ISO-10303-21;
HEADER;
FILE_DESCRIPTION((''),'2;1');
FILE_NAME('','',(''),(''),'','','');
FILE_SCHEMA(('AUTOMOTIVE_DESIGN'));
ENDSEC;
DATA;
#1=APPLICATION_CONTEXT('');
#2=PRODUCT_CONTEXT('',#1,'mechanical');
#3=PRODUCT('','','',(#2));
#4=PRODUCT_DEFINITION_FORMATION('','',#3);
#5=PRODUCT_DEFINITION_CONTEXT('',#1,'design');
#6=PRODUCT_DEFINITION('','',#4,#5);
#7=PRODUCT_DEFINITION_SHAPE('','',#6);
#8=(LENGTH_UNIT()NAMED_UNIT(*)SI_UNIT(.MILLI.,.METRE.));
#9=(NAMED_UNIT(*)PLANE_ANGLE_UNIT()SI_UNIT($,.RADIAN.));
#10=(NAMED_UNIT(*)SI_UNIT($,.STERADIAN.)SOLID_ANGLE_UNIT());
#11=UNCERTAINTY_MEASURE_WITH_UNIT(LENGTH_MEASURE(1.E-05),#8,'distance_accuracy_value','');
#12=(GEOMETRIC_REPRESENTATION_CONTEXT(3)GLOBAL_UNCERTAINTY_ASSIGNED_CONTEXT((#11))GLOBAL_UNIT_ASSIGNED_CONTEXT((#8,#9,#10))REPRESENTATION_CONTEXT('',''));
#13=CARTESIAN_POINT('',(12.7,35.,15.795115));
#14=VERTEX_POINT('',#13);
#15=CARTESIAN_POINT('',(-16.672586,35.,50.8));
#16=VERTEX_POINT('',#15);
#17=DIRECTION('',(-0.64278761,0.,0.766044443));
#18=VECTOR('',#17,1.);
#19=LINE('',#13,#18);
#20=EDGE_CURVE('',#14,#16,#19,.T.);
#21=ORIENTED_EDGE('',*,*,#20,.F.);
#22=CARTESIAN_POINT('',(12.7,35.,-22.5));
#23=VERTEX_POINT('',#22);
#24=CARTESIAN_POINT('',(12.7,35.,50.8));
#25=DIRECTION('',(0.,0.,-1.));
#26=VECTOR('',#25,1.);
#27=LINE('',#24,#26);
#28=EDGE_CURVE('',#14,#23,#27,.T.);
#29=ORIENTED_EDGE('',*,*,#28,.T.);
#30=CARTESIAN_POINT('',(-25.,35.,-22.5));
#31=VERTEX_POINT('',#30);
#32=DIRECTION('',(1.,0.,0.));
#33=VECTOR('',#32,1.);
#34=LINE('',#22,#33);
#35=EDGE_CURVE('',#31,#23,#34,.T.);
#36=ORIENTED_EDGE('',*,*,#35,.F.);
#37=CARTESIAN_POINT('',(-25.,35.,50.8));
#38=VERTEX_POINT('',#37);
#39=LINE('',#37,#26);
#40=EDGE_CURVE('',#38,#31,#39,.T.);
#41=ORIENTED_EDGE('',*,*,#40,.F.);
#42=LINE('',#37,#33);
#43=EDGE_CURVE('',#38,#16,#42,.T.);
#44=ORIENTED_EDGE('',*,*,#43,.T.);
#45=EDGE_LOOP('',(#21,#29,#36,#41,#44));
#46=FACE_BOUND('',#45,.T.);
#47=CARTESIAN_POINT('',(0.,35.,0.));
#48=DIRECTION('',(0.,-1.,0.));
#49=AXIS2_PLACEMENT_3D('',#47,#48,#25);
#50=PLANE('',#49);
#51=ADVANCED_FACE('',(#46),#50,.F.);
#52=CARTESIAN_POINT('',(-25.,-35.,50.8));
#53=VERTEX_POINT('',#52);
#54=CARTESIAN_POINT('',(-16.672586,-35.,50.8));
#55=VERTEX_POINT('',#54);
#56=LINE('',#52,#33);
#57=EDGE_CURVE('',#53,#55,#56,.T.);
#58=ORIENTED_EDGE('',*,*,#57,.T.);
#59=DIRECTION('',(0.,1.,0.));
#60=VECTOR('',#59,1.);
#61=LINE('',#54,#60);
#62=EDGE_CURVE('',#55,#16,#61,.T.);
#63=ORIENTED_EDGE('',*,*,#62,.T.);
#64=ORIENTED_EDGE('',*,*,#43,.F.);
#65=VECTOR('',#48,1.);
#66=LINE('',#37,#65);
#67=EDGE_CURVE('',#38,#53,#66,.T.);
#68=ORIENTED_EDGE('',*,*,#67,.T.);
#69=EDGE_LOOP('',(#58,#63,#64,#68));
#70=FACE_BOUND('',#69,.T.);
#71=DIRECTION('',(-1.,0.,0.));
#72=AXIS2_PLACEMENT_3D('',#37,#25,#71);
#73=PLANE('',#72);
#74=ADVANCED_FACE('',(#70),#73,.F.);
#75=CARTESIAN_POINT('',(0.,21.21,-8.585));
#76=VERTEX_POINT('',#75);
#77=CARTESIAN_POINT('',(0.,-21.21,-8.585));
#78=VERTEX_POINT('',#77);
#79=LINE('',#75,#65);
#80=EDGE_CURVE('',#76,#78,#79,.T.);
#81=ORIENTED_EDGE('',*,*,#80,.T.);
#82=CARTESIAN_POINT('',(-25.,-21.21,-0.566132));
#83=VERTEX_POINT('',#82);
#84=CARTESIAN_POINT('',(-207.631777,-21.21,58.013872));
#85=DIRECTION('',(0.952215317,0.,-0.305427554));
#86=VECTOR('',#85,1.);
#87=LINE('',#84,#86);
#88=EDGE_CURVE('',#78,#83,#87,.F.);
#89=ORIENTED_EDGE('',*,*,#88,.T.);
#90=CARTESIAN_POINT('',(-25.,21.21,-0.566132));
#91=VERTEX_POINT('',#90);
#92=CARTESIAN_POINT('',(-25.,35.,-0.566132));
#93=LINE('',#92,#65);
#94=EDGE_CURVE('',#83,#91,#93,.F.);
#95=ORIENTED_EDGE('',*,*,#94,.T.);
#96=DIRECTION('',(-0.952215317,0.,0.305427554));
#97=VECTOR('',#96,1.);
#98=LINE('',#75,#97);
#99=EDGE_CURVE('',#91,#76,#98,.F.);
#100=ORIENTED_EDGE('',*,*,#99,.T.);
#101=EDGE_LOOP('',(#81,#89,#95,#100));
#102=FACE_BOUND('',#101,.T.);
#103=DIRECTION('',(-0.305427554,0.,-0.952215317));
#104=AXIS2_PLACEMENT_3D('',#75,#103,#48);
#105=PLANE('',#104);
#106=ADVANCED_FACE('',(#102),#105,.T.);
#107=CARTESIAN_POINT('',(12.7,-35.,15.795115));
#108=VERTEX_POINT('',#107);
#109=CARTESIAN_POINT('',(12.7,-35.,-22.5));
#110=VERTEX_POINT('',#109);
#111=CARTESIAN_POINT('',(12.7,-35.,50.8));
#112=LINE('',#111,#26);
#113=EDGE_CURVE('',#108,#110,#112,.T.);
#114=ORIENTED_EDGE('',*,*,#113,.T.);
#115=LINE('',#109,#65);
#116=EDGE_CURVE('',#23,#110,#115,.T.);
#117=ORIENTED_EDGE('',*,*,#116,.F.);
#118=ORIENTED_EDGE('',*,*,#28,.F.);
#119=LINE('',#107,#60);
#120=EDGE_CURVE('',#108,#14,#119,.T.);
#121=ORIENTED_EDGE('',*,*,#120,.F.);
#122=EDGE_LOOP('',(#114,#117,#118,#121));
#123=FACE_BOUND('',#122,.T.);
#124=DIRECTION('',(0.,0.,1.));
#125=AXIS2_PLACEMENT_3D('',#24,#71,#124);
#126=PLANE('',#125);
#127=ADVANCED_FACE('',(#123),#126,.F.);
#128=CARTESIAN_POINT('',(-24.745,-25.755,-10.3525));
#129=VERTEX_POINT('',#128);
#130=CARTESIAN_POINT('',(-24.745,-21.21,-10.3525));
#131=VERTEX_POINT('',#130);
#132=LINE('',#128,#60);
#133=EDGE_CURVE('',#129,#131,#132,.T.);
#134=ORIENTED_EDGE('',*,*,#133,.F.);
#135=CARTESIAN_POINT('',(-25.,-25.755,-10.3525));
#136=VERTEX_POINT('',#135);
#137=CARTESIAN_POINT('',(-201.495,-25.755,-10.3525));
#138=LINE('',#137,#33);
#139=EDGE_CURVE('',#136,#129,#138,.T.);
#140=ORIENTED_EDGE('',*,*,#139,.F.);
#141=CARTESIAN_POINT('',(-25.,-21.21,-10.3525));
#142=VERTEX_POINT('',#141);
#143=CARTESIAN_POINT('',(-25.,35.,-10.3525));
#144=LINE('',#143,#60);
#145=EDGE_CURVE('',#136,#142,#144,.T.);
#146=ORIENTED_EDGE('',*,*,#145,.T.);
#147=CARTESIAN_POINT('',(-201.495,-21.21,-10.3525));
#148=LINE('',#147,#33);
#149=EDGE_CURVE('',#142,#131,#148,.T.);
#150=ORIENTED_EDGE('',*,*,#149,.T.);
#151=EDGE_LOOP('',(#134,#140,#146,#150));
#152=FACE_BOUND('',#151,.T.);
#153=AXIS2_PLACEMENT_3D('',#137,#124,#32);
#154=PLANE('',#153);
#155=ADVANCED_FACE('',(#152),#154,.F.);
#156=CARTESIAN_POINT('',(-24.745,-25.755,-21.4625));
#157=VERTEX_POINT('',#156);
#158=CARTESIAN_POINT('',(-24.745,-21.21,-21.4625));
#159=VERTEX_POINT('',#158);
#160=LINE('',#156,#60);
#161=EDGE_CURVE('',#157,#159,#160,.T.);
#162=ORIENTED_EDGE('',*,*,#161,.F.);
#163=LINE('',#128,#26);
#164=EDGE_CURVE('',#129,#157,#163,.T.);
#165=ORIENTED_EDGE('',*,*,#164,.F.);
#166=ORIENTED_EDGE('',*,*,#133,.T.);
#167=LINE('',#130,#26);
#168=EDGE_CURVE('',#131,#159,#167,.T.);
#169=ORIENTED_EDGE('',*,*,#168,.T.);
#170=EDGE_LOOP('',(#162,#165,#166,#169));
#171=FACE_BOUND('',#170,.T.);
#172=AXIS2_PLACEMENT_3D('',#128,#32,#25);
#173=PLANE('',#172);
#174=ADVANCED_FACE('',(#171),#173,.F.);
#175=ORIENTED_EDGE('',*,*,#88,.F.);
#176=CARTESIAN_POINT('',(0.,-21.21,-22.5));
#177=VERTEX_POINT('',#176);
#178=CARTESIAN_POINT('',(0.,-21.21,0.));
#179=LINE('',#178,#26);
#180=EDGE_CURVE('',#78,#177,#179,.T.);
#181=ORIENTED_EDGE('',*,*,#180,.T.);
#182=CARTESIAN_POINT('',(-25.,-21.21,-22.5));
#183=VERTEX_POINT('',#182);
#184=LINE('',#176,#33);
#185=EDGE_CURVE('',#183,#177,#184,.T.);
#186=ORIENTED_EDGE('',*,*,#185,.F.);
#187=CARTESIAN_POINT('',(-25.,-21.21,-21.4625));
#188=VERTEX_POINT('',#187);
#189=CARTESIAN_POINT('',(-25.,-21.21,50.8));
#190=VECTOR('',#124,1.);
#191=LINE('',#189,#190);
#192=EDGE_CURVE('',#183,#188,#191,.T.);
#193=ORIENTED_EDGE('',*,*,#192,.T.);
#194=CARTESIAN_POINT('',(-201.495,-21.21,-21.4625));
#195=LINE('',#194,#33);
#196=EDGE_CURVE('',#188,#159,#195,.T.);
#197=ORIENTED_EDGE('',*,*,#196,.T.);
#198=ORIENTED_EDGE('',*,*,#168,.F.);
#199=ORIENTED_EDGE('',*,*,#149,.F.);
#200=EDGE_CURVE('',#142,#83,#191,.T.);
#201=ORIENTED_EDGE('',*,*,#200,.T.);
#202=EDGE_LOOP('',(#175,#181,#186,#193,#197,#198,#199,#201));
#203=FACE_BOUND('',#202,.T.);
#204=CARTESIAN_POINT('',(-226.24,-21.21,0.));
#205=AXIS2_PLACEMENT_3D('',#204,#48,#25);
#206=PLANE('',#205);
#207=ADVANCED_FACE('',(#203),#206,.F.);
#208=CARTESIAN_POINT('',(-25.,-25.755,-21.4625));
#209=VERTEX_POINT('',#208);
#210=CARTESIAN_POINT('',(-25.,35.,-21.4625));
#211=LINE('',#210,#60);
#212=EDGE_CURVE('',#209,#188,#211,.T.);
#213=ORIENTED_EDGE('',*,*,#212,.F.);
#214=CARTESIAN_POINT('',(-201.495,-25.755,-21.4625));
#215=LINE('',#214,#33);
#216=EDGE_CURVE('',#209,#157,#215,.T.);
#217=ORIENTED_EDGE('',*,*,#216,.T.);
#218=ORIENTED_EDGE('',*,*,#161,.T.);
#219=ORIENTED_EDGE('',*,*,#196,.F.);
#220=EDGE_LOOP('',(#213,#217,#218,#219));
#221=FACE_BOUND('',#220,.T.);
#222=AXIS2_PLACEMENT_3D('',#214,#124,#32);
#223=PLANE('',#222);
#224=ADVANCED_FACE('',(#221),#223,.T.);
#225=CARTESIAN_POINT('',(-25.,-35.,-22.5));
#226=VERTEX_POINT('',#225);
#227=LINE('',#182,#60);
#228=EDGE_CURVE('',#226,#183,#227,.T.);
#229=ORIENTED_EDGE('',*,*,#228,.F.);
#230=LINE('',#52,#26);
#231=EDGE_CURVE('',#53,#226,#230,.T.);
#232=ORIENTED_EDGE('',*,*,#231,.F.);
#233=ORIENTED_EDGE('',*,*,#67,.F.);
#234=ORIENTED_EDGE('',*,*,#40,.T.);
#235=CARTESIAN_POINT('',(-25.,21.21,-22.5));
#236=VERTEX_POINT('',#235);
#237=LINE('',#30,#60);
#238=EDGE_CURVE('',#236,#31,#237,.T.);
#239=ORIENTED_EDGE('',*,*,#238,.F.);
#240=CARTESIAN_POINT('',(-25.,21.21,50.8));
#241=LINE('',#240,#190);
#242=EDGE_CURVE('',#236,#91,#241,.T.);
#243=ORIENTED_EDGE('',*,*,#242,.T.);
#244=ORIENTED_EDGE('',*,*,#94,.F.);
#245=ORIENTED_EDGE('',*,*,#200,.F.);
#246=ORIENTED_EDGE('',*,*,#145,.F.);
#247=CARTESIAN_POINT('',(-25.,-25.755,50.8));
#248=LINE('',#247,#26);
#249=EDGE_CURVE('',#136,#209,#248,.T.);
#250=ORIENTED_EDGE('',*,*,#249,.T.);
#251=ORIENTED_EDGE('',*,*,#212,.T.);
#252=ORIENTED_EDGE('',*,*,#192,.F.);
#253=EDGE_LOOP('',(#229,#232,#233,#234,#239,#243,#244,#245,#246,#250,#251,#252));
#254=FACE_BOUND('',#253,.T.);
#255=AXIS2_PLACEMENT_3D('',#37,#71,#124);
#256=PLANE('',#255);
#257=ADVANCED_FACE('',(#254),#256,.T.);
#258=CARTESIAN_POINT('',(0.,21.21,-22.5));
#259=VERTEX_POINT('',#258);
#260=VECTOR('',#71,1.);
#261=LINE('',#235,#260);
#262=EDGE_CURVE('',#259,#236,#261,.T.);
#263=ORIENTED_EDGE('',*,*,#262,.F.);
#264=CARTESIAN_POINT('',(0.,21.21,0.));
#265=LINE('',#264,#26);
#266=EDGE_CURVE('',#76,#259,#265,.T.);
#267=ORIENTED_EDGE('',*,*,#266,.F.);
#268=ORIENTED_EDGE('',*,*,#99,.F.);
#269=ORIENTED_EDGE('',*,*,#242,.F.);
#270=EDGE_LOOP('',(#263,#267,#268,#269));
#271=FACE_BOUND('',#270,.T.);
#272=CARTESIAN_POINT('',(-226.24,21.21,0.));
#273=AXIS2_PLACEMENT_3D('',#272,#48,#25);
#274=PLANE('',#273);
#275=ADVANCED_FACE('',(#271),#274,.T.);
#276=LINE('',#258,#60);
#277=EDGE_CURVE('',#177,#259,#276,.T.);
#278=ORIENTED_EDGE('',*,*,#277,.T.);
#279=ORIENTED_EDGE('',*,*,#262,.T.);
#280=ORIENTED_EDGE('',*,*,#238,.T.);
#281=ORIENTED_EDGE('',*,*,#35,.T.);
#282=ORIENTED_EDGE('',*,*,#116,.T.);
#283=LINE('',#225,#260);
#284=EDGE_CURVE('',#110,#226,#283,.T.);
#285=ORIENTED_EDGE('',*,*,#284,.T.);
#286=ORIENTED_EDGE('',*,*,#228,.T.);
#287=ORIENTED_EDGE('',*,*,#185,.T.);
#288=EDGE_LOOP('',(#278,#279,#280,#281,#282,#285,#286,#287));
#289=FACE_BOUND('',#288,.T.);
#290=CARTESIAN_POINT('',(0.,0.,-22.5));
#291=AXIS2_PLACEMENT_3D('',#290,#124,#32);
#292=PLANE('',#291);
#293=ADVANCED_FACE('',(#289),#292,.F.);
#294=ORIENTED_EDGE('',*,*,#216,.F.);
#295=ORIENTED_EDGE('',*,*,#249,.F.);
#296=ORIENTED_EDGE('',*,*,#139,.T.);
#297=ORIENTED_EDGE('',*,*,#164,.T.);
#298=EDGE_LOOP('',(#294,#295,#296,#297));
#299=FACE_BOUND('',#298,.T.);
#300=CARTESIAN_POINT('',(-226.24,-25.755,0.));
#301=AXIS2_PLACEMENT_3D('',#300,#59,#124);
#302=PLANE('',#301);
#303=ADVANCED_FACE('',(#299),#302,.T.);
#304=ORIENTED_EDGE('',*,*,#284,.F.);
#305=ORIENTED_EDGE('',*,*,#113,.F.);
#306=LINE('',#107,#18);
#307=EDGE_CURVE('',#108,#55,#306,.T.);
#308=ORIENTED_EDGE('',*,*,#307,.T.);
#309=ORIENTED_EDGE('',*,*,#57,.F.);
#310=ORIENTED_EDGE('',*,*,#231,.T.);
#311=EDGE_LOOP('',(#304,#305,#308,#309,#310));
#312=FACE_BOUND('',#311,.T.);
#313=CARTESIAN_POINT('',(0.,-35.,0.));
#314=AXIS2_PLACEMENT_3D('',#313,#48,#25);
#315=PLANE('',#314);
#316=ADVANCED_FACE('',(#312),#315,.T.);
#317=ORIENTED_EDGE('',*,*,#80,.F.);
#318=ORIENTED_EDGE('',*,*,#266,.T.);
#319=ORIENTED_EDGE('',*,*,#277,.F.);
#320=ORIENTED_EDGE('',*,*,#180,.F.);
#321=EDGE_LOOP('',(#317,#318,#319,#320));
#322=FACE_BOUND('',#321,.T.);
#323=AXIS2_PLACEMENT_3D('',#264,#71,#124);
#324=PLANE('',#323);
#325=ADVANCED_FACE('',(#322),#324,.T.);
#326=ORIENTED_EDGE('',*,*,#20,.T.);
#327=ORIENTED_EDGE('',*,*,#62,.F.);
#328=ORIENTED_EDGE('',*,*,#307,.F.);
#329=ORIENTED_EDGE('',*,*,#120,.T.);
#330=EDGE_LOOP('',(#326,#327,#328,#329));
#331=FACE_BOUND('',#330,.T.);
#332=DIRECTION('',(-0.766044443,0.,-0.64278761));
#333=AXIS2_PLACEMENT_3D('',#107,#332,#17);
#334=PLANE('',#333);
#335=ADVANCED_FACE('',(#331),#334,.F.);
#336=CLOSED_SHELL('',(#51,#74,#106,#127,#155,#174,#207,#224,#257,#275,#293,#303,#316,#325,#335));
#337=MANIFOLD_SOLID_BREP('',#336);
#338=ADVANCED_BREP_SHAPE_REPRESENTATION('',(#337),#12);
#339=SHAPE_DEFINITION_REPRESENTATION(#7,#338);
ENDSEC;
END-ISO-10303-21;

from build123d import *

# Parameters (mm, degrees)
SKETCH1_W           = 37.7
SKETCH1_H           = 80.8
BOSS_EXTRUDE1_DEPTH = 35
CAVITY1_START       = -21.21
CAVITY1_DEPTH       = 42.42
CAVITY1_START_2     = -25.755
CAVITY1_2_OUTLINE_W = 0.255
CAVITY1_2_OUTLINE_H = 11.11
CAVITY1_2_DEPTH     = 4.545
CUT_EXTRUDE1_DEPTH  = 91.031327881
CUT_EXTRUDE2_DEPTH  = 7.5


# Read off the part's stored shape, not the designer's step: Cavity1
with BuildPart() as part:
    # Sketch1 → Boss-Extrude1 (new, symmetric)
    with BuildSketch(Plane(origin=(0, 0, 0), x_dir=(1, 0, 0), z_dir=(0, 1, 0))):
        with Locations((-6.15, -10.4)):
            Rectangle(SKETCH1_W, SKETCH1_H)
    extrude(amount=BOSS_EXTRUDE1_DEPTH, both=True)

    # Cavity1 outline → Cavity1 (cut)
    with BuildSketch(Plane(origin=(0, 0, 0), x_dir=(1, 0, 0), z_dir=(0, 1, 0)).offset(CAVITY1_START)):
        Polygon((0, 8.585), (0, 30), (-25, 30), (-25, 0.566132075), align=None)
    extrude(amount=CAVITY1_DEPTH, mode=Mode.SUBTRACT)

    # Cavity1 2 outline → Cavity1 2 (cut)
    with BuildSketch(Plane(origin=(0, 0, 0), x_dir=(1, 0, 0), z_dir=(0, 1, 0)).offset(CAVITY1_START_2)):
        with Locations((-24.8725, 15.9075)):
            Rectangle(CAVITY1_2_OUTLINE_W, CAVITY1_2_OUTLINE_H)
    extrude(amount=CAVITY1_2_DEPTH, mode=Mode.SUBTRACT)

    # Sketch2 → Cut-Extrude1 (cut, through all)
    with BuildSketch(Plane(origin=(0, 35, 0), x_dir=(1, 0, 0), z_dir=(0, 1, 0))):
        Polygon((12.7, -15.795114576), (-16.672586448, -50.8), (12.7, -50.8), align=None)
    extrude(amount=-CUT_EXTRUDE1_DEPTH, mode=Mode.SUBTRACT)

    # Sketch3 → Cut-Extrude2 (cut)
    with BuildSketch(Plane(origin=(0, 0, -30), x_dir=(-1, 0, 0), z_dir=(0, 0, -1))):
        Polygon((-12.7, 35), (25, 35), (25, 21.21), (0, 21.21), (0, -21.21), (25, -21.21), (25, -35), (-12.7, -35), align=None)
    extrude(amount=-CUT_EXTRUDE2_DEPTH, mode=Mode.SUBTRACT)


solid = part.part
